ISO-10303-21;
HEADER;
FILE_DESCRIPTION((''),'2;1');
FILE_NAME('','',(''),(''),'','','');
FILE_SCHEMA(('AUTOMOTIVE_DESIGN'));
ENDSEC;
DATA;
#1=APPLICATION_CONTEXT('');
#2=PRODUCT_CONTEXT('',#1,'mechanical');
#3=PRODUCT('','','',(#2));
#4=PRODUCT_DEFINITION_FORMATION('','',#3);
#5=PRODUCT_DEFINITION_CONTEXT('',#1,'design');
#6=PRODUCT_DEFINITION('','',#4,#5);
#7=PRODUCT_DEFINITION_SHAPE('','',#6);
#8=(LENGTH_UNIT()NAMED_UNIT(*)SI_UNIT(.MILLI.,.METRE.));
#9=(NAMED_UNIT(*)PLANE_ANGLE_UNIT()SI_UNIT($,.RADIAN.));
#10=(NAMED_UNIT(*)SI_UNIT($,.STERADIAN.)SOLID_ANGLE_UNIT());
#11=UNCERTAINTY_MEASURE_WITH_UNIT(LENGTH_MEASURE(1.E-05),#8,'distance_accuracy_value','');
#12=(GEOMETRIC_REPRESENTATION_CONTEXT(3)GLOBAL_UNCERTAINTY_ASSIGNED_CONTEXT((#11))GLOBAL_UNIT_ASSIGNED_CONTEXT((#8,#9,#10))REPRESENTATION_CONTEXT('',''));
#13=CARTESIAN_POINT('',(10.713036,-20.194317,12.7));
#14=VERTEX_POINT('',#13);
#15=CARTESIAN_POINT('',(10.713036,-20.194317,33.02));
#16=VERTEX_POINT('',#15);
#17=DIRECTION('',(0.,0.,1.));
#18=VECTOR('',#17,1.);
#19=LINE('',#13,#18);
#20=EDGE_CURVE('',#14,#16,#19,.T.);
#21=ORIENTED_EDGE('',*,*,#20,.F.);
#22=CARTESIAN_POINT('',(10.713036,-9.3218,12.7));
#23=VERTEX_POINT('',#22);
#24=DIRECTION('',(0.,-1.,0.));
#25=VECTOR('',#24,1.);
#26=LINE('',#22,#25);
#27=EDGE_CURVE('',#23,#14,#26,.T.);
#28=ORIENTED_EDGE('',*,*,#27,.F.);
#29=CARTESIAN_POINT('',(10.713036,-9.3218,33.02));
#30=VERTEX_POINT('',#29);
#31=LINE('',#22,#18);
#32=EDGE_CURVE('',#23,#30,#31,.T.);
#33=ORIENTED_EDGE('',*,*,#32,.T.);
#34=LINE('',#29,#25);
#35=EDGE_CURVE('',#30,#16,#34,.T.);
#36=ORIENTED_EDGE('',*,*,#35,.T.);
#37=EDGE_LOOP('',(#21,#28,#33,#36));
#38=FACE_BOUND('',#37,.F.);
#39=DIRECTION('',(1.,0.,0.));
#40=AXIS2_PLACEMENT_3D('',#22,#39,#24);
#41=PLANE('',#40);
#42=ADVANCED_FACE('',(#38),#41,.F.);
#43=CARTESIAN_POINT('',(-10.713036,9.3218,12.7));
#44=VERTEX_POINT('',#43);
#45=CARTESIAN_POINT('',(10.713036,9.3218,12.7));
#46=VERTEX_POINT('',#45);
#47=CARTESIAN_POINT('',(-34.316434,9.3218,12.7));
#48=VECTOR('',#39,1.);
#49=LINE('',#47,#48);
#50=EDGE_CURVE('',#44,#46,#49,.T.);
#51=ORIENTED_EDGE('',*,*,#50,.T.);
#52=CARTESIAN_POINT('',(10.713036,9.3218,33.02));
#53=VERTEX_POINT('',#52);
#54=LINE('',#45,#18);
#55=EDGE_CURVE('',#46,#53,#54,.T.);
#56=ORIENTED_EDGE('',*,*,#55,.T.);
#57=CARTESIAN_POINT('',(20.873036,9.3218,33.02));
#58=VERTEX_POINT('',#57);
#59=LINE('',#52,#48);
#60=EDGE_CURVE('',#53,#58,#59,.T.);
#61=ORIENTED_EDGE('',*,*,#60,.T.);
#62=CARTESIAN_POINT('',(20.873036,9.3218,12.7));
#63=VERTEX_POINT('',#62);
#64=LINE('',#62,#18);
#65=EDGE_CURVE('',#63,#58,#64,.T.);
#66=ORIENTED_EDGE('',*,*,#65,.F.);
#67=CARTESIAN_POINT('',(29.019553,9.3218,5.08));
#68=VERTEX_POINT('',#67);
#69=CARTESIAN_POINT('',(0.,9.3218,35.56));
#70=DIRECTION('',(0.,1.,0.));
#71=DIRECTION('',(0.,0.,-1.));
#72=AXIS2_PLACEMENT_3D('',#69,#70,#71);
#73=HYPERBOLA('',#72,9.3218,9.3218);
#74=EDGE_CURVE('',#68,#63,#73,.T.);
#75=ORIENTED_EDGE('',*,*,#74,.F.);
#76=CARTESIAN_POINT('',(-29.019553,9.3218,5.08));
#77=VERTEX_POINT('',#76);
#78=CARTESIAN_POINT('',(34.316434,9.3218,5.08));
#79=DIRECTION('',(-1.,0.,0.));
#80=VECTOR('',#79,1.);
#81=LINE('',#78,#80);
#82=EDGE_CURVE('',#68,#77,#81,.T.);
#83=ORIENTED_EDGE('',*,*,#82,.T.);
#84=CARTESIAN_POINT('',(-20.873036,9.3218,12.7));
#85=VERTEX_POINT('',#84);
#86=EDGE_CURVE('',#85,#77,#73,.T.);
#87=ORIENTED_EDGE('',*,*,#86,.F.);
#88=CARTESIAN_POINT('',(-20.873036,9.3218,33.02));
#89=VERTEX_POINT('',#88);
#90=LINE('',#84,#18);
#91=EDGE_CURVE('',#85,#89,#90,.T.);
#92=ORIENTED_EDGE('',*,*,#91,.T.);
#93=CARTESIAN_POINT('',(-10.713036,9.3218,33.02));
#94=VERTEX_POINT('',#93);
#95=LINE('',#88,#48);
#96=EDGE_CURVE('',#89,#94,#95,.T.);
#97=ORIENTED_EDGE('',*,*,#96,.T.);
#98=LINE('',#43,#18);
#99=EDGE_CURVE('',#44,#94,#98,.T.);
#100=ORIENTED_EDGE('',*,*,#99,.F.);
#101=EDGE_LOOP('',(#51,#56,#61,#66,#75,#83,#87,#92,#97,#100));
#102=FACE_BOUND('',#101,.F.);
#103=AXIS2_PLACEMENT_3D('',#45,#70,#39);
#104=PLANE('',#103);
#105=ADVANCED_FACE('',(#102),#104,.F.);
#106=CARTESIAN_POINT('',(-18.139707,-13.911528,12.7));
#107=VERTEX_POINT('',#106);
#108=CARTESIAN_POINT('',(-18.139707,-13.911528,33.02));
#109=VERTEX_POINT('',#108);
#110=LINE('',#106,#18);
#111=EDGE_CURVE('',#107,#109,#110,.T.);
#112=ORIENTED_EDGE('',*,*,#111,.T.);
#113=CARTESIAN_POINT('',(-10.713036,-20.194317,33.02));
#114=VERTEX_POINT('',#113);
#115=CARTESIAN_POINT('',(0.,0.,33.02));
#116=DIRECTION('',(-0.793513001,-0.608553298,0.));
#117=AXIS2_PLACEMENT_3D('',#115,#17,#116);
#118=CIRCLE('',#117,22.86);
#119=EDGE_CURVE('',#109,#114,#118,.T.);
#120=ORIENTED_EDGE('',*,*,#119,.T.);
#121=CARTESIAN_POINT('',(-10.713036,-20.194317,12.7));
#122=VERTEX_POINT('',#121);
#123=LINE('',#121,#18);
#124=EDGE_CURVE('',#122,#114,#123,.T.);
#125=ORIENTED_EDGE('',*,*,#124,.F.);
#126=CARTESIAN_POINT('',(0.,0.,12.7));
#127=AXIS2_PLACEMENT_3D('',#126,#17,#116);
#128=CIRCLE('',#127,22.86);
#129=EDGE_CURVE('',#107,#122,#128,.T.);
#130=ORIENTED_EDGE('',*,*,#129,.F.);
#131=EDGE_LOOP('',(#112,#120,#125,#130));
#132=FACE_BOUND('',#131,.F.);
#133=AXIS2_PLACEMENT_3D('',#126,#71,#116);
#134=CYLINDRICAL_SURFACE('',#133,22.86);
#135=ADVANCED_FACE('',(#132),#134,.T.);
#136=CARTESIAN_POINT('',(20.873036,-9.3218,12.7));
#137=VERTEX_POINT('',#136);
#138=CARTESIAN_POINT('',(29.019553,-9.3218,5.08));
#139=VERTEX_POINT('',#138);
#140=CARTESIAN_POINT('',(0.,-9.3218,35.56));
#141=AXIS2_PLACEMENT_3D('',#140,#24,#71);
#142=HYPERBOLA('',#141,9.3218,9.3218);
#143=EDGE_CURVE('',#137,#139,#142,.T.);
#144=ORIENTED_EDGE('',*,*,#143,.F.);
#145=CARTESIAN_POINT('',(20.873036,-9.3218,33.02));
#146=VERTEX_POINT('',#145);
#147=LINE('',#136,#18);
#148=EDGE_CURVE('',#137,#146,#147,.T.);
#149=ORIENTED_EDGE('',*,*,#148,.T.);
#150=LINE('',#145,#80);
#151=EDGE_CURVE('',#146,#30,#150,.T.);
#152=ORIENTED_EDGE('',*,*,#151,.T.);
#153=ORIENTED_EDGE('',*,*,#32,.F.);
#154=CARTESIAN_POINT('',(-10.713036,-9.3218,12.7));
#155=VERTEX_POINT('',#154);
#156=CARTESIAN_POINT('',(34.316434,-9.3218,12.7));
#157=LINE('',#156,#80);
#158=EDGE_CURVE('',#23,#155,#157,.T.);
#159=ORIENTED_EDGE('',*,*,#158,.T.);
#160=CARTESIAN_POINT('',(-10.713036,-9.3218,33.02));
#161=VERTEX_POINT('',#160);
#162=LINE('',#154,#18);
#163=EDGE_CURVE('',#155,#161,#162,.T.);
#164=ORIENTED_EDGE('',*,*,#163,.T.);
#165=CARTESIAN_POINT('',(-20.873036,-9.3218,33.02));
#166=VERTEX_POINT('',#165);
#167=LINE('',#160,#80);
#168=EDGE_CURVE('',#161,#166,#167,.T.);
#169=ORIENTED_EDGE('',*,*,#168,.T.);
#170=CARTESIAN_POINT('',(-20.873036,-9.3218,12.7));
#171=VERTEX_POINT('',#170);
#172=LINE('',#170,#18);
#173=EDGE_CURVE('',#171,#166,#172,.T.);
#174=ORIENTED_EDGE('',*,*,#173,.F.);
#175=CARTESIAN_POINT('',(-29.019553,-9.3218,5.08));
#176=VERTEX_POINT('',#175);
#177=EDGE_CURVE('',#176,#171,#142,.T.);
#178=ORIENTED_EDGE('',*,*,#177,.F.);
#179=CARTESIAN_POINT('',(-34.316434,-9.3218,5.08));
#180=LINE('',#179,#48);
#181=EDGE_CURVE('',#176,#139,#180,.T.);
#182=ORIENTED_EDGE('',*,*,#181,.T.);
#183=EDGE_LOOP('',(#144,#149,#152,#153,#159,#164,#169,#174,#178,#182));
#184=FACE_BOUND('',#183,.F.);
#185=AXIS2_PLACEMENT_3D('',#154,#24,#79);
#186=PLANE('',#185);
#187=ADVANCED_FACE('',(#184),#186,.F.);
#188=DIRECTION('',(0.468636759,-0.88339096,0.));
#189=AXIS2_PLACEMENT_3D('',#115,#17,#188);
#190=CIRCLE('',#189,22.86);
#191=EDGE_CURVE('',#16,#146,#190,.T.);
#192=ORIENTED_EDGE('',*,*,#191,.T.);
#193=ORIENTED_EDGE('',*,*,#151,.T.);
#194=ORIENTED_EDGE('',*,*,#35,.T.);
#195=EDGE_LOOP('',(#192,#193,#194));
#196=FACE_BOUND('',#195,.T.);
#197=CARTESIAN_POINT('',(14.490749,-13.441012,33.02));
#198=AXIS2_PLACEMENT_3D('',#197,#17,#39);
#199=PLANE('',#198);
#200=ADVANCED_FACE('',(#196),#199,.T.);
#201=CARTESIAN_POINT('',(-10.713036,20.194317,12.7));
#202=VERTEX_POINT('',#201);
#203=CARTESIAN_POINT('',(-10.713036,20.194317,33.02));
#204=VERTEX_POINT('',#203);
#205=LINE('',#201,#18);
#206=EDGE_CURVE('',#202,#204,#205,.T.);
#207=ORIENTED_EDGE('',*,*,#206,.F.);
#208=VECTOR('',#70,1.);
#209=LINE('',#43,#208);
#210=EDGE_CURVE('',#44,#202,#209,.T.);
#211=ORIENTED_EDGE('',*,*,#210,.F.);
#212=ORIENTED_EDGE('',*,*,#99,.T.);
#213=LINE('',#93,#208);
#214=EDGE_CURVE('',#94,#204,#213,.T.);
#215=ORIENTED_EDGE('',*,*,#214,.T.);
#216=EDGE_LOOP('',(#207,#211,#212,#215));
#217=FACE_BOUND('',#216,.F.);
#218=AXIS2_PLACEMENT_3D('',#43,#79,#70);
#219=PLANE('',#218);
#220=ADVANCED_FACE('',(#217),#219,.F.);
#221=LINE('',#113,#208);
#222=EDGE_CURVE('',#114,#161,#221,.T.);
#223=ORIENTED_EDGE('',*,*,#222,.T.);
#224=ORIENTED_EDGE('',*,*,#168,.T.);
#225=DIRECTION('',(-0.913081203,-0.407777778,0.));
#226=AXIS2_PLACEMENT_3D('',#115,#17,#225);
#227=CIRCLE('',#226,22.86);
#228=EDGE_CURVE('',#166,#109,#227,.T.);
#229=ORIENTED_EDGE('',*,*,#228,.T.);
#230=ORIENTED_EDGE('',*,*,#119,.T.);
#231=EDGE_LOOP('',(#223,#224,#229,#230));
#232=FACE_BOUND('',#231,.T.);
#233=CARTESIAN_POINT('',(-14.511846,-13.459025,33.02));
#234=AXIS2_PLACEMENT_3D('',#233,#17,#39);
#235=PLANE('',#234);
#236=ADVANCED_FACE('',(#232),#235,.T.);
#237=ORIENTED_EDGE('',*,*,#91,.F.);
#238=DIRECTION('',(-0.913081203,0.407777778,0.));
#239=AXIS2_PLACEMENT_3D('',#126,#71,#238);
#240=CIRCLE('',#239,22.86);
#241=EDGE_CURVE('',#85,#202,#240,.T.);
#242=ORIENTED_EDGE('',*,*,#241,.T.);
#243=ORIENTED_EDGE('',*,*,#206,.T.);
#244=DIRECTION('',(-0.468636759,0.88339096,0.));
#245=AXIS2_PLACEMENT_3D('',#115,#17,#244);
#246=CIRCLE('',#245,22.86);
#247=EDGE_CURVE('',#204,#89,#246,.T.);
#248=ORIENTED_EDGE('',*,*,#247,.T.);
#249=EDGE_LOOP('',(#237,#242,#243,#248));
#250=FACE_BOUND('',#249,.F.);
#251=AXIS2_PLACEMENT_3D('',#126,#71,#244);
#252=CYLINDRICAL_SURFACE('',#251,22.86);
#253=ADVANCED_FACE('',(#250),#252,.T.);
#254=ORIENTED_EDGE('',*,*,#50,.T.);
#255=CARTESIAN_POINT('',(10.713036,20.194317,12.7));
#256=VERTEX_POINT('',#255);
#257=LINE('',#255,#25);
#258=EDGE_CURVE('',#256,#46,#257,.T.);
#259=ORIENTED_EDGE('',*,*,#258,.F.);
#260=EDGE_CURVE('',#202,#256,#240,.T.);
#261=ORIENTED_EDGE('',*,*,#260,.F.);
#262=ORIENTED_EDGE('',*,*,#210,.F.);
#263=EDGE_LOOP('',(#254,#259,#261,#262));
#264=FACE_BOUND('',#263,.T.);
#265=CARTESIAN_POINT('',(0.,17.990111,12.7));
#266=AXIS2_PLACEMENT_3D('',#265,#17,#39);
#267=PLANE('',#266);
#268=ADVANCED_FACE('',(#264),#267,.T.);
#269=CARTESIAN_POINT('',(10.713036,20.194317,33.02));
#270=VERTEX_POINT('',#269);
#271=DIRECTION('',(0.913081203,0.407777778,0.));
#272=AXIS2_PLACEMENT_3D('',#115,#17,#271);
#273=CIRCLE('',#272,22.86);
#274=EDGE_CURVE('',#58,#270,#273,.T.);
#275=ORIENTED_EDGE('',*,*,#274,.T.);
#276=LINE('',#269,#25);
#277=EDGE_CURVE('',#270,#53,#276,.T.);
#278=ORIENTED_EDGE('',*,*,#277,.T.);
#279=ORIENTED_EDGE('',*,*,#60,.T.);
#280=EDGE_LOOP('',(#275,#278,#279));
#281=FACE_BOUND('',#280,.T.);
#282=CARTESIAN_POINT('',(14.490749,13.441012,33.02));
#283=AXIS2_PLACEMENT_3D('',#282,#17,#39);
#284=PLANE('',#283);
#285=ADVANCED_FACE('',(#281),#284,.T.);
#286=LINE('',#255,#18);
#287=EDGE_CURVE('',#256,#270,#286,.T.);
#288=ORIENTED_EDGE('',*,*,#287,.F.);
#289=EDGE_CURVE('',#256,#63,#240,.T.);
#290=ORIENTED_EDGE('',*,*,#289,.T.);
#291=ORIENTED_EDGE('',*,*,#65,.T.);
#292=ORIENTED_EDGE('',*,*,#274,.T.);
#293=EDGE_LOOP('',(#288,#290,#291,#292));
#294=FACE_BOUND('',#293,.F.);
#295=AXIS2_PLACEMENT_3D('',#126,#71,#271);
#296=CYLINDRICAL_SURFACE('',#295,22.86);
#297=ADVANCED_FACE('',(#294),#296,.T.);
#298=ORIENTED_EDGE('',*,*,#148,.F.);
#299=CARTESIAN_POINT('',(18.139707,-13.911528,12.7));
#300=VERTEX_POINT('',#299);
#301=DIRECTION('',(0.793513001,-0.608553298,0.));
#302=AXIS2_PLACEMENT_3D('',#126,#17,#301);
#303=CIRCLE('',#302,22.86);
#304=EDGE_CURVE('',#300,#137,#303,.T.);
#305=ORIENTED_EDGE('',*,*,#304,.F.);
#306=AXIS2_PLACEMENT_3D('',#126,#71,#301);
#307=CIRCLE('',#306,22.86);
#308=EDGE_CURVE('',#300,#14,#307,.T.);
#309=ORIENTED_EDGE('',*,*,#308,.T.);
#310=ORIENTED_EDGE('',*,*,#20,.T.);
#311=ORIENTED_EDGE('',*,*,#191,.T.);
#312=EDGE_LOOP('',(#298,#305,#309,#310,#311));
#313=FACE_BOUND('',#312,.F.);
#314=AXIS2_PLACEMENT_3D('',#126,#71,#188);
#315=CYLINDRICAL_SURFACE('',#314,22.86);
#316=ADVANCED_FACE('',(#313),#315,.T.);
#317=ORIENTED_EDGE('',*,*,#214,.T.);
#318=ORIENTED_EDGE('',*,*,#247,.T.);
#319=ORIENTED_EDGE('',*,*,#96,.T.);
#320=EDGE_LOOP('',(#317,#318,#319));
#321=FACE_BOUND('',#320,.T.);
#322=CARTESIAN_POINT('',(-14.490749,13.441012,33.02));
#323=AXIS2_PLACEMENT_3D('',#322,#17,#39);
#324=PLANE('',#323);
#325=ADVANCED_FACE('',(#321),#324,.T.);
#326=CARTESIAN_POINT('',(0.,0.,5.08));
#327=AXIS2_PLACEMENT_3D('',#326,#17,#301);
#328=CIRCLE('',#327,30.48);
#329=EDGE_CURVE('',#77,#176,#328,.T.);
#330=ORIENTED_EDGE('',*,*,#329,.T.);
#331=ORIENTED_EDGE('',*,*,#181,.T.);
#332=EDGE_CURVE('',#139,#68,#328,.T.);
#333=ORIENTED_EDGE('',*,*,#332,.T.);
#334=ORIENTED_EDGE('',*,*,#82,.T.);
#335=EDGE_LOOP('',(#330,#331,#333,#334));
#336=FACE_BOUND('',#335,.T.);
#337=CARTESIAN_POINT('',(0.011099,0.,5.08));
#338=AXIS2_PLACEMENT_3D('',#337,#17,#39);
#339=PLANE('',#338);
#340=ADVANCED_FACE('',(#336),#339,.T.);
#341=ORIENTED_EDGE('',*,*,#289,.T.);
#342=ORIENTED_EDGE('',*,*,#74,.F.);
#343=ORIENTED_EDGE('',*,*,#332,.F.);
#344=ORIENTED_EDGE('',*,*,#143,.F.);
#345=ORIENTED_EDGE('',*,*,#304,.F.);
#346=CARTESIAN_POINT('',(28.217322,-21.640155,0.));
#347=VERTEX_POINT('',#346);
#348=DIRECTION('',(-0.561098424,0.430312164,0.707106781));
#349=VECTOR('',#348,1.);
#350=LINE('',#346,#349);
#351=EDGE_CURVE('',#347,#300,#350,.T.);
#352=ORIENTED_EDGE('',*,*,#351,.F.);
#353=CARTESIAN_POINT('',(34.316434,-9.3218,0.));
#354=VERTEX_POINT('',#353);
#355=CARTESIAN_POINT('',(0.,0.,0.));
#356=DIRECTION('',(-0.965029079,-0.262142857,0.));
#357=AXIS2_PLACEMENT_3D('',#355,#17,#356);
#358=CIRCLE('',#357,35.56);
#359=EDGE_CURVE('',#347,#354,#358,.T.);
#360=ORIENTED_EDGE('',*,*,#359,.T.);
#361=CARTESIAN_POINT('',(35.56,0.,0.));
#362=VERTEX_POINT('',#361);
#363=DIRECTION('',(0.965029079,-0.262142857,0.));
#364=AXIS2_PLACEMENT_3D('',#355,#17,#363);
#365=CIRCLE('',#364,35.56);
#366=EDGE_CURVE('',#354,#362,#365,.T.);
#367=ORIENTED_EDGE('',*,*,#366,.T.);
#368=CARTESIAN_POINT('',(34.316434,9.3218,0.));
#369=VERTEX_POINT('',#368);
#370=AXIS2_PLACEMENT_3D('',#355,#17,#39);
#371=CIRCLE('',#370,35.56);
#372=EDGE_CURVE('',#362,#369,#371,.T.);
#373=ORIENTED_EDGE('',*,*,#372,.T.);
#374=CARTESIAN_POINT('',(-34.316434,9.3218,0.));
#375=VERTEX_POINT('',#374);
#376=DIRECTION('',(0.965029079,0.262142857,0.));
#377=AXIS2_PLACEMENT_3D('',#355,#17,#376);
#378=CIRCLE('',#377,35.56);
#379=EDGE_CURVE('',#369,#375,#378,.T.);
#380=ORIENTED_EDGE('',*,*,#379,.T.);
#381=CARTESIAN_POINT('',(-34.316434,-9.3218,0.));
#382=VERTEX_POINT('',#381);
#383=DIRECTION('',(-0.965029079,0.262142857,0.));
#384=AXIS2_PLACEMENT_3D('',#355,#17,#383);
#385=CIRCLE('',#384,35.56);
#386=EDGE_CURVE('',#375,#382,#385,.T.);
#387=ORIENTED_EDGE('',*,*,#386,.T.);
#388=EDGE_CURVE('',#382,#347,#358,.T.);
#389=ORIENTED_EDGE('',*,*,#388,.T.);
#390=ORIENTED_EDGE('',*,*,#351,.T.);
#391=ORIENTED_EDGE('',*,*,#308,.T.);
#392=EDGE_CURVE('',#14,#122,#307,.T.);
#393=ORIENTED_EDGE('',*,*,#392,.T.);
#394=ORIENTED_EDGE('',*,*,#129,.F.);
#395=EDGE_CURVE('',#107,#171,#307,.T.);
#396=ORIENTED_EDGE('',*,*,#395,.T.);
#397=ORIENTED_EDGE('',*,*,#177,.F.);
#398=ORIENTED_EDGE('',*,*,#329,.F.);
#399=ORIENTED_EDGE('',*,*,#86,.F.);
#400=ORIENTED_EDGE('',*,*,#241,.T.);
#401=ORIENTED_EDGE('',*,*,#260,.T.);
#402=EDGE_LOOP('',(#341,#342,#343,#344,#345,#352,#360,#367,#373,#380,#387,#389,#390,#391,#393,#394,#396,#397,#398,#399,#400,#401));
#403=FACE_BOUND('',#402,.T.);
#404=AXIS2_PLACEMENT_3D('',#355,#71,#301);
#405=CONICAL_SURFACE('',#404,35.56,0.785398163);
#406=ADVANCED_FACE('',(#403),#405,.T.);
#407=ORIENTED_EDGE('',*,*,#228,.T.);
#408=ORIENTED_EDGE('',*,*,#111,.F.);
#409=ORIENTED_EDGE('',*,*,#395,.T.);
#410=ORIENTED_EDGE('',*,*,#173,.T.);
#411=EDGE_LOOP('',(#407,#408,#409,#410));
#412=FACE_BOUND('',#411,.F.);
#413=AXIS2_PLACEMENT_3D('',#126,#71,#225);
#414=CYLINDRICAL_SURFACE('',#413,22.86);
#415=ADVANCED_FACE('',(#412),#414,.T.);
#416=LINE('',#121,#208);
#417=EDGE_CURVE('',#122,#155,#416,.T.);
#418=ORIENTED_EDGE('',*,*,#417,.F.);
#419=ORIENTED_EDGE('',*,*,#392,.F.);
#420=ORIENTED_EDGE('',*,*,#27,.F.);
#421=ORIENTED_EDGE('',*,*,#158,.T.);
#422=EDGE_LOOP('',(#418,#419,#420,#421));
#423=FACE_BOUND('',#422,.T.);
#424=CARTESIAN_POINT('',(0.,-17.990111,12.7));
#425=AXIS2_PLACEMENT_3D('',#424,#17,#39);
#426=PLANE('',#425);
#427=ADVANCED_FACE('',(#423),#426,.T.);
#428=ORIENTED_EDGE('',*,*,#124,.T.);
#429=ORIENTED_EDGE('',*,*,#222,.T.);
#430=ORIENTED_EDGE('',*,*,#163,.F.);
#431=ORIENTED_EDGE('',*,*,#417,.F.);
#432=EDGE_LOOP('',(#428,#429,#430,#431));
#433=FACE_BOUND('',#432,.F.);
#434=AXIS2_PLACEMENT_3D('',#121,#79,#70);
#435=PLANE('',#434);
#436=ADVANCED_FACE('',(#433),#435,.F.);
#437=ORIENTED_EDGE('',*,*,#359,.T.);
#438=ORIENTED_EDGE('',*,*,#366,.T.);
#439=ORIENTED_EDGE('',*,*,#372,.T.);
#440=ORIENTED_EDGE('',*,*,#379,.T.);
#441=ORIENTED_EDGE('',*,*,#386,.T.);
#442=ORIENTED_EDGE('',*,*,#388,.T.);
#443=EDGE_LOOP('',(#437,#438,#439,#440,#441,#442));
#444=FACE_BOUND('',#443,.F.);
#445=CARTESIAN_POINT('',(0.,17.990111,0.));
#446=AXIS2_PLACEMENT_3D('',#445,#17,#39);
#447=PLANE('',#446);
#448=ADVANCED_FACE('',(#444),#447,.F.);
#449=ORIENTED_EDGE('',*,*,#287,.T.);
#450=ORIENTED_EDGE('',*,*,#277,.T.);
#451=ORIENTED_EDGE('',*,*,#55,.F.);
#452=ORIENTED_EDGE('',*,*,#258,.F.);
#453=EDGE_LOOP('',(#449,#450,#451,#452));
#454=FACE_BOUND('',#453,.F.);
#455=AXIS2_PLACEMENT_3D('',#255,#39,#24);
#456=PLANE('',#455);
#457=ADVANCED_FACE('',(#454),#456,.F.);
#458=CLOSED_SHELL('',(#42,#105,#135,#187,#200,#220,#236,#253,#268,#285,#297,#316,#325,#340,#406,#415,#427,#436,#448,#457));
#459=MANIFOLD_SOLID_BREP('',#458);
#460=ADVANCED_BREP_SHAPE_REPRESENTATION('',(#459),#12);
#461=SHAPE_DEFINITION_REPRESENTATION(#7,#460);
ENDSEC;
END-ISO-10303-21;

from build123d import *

# Parameters (mm, degrees)
F1_DEPTH    = 5.08
F2_SIZE     = 5.07999
F3_DEPTH    = 12.7
F4_DEPTH    = 12.7
F5_T2_ANGLE = 254.9699407606
F5_T4_ANGLE = 254.9699407606
F8_DEPTH    = 20.32
F9_DEPTH    = 20.32


# Not quite as in the source:
# - a fillet or chamfer that OpenCascade refuses, or shapes differently, is made with other operations: its cross-section is extruded or revolved along the edge and cut away or added
# - a fillet or chamfer is up to 0.001 mm smaller than in the source, because OpenCascade refuses the exact size


with BuildPart() as f1:
    # F0 (on Top) → F1 (new body)
    with BuildSketch(Plane.XY):
        with BuildLine():
            ThreePointArc((34.3164340333, -9.3218), (35.2477374751, -4.7021912858), (35.56, 0))
            ThreePointArc((35.56, 0), (35.2477374751, 4.7021912858), (34.3164340333, 9.3218))
            Line((34.3164340333, 9.3218), (-34.3164340333, 9.3218))
            ThreePointArc((-34.3164340333, 9.3218), (-35.56, 0), (-34.3164340333, -9.3218))
            Line((-34.3164340333, -9.3218), (34.3164340333, -9.3218))
        make_face()
    extrude(amount=F1_DEPTH)

    # F2 (size 5.08 in the source; OpenCascade refuses exactly that, so slightly less here)
    f2_edges = [f1.edges().sort_by_distance(p)[0] for p in [
        (35.56, 0, 5.08),
        (-35.56, 0, 5.08),
    ]]
    chamfer(f2_edges, length=F2_SIZE)

    # F0 (on Top) → F3 (join)
    with BuildSketch(Plane.XY):
        with BuildLine():
            ThreePointArc((-34.3164340333, -9.3218), (0, -35.56), (34.3164340333, -9.3218))
            Line((34.3164340333, -9.3218), (-34.3164340333, -9.3218))
        make_face()
    extrude(amount=F3_DEPTH)

    # F0 (on Top) → F4 (join)
    with BuildSketch(Plane.XY):
        with BuildLine():
            Line((-34.3164340333, 9.3218), (34.3164340333, 9.3218))
            ThreePointArc((34.3164340333, 9.3218), (0, 35.56), (-34.3164340333, 9.3218))
        make_face()
    extrude(amount=F4_DEPTH)

    # F5: chamfer of 12.7 on 2 edges, made by hand

    # F5_s1 → F5_t2 (revolve, cut)
    with BuildSketch(Plane(origin=(0, 0, 0), x_dir=(0, 0, 1), z_dir=(-0.6085532985, -0.7935130011, 0))):
        Polygon((0, -35.56), (12.7, -22.86), (12.7, -35.56), align=None)
    revolve(axis=Axis((0, 0, 12.7), (0, 0, 1)), revolution_arc=F5_T2_ANGLE, mode=Mode.SUBTRACT)

    # F5_s3 → F5_t4 (revolve, cut)
    with BuildSketch(Plane(origin=(0, 0, 0), x_dir=(0, 0, 1), z_dir=(0.6085532985, 0.7935130011, 0))):
        Polygon((0, -35.56), (12.7, -22.86), (12.7, -35.56), align=None)
    revolve(axis=Axis((0, 0, 12.7), (0, 0, 1)), revolution_arc=F5_T4_ANGLE, mode=Mode.SUBTRACT)

    # F6 (on face) → F8 (join)
    with BuildSketch(Plane.XY.offset(12.7)):
        with BuildLine():
            Line((-10.7130363091, -20.1943173452), (-10.7130363091, -9.3218))
            Line((-10.7130363091, -9.3218), (-20.8730363091, -9.3218))
            ThreePointArc((-20.8730363091, -9.3218), (-19.6408996947, -11.6967798638), (-18.1397072045, -13.911528404))
            ThreePointArc((-18.1397072045, -13.911528404), (-14.7644356914, -17.4525367416), (-10.7130363091, -20.1943173452))
        make_face()
        with BuildLine():
            ThreePointArc((10.7130363091, -20.1943173452), (16.7024819777, -15.6079049134), (20.8730363091, -9.3218))
            Line((20.8730363091, -9.3218), (10.7130363091, -9.3218))
            Line((10.7130363091, -9.3218), (10.7130363091, -20.1943173452))
        make_face()
    extrude(amount=F8_DEPTH)

    # F7 (on face) → F9 (join)
    with BuildSketch(Plane.XY.offset(12.7)):
        with BuildLine():
            Line((10.7130363091, 9.3218), (20.8730363091, 9.3218))
            ThreePointArc((20.8730363091, 9.3218), (16.7024819777, 15.6079049134), (10.7130363091, 20.1943173452))
            Line((10.7130363091, 20.1943173452), (10.7130363091, 9.3218))
        make_face()
        with BuildLine():
            Line((-20.8730363091, 9.3218), (-10.7130363091, 9.3218))
            Line((-10.7130363091, 9.3218), (-10.7130363091, 20.1943173452))
            ThreePointArc((-10.7130363091, 20.1943173452), (-16.7024819777, 15.6079049134), (-20.8730363091, 9.3218))
        make_face()
    extrude(amount=F9_DEPTH)


solid = f1.part
